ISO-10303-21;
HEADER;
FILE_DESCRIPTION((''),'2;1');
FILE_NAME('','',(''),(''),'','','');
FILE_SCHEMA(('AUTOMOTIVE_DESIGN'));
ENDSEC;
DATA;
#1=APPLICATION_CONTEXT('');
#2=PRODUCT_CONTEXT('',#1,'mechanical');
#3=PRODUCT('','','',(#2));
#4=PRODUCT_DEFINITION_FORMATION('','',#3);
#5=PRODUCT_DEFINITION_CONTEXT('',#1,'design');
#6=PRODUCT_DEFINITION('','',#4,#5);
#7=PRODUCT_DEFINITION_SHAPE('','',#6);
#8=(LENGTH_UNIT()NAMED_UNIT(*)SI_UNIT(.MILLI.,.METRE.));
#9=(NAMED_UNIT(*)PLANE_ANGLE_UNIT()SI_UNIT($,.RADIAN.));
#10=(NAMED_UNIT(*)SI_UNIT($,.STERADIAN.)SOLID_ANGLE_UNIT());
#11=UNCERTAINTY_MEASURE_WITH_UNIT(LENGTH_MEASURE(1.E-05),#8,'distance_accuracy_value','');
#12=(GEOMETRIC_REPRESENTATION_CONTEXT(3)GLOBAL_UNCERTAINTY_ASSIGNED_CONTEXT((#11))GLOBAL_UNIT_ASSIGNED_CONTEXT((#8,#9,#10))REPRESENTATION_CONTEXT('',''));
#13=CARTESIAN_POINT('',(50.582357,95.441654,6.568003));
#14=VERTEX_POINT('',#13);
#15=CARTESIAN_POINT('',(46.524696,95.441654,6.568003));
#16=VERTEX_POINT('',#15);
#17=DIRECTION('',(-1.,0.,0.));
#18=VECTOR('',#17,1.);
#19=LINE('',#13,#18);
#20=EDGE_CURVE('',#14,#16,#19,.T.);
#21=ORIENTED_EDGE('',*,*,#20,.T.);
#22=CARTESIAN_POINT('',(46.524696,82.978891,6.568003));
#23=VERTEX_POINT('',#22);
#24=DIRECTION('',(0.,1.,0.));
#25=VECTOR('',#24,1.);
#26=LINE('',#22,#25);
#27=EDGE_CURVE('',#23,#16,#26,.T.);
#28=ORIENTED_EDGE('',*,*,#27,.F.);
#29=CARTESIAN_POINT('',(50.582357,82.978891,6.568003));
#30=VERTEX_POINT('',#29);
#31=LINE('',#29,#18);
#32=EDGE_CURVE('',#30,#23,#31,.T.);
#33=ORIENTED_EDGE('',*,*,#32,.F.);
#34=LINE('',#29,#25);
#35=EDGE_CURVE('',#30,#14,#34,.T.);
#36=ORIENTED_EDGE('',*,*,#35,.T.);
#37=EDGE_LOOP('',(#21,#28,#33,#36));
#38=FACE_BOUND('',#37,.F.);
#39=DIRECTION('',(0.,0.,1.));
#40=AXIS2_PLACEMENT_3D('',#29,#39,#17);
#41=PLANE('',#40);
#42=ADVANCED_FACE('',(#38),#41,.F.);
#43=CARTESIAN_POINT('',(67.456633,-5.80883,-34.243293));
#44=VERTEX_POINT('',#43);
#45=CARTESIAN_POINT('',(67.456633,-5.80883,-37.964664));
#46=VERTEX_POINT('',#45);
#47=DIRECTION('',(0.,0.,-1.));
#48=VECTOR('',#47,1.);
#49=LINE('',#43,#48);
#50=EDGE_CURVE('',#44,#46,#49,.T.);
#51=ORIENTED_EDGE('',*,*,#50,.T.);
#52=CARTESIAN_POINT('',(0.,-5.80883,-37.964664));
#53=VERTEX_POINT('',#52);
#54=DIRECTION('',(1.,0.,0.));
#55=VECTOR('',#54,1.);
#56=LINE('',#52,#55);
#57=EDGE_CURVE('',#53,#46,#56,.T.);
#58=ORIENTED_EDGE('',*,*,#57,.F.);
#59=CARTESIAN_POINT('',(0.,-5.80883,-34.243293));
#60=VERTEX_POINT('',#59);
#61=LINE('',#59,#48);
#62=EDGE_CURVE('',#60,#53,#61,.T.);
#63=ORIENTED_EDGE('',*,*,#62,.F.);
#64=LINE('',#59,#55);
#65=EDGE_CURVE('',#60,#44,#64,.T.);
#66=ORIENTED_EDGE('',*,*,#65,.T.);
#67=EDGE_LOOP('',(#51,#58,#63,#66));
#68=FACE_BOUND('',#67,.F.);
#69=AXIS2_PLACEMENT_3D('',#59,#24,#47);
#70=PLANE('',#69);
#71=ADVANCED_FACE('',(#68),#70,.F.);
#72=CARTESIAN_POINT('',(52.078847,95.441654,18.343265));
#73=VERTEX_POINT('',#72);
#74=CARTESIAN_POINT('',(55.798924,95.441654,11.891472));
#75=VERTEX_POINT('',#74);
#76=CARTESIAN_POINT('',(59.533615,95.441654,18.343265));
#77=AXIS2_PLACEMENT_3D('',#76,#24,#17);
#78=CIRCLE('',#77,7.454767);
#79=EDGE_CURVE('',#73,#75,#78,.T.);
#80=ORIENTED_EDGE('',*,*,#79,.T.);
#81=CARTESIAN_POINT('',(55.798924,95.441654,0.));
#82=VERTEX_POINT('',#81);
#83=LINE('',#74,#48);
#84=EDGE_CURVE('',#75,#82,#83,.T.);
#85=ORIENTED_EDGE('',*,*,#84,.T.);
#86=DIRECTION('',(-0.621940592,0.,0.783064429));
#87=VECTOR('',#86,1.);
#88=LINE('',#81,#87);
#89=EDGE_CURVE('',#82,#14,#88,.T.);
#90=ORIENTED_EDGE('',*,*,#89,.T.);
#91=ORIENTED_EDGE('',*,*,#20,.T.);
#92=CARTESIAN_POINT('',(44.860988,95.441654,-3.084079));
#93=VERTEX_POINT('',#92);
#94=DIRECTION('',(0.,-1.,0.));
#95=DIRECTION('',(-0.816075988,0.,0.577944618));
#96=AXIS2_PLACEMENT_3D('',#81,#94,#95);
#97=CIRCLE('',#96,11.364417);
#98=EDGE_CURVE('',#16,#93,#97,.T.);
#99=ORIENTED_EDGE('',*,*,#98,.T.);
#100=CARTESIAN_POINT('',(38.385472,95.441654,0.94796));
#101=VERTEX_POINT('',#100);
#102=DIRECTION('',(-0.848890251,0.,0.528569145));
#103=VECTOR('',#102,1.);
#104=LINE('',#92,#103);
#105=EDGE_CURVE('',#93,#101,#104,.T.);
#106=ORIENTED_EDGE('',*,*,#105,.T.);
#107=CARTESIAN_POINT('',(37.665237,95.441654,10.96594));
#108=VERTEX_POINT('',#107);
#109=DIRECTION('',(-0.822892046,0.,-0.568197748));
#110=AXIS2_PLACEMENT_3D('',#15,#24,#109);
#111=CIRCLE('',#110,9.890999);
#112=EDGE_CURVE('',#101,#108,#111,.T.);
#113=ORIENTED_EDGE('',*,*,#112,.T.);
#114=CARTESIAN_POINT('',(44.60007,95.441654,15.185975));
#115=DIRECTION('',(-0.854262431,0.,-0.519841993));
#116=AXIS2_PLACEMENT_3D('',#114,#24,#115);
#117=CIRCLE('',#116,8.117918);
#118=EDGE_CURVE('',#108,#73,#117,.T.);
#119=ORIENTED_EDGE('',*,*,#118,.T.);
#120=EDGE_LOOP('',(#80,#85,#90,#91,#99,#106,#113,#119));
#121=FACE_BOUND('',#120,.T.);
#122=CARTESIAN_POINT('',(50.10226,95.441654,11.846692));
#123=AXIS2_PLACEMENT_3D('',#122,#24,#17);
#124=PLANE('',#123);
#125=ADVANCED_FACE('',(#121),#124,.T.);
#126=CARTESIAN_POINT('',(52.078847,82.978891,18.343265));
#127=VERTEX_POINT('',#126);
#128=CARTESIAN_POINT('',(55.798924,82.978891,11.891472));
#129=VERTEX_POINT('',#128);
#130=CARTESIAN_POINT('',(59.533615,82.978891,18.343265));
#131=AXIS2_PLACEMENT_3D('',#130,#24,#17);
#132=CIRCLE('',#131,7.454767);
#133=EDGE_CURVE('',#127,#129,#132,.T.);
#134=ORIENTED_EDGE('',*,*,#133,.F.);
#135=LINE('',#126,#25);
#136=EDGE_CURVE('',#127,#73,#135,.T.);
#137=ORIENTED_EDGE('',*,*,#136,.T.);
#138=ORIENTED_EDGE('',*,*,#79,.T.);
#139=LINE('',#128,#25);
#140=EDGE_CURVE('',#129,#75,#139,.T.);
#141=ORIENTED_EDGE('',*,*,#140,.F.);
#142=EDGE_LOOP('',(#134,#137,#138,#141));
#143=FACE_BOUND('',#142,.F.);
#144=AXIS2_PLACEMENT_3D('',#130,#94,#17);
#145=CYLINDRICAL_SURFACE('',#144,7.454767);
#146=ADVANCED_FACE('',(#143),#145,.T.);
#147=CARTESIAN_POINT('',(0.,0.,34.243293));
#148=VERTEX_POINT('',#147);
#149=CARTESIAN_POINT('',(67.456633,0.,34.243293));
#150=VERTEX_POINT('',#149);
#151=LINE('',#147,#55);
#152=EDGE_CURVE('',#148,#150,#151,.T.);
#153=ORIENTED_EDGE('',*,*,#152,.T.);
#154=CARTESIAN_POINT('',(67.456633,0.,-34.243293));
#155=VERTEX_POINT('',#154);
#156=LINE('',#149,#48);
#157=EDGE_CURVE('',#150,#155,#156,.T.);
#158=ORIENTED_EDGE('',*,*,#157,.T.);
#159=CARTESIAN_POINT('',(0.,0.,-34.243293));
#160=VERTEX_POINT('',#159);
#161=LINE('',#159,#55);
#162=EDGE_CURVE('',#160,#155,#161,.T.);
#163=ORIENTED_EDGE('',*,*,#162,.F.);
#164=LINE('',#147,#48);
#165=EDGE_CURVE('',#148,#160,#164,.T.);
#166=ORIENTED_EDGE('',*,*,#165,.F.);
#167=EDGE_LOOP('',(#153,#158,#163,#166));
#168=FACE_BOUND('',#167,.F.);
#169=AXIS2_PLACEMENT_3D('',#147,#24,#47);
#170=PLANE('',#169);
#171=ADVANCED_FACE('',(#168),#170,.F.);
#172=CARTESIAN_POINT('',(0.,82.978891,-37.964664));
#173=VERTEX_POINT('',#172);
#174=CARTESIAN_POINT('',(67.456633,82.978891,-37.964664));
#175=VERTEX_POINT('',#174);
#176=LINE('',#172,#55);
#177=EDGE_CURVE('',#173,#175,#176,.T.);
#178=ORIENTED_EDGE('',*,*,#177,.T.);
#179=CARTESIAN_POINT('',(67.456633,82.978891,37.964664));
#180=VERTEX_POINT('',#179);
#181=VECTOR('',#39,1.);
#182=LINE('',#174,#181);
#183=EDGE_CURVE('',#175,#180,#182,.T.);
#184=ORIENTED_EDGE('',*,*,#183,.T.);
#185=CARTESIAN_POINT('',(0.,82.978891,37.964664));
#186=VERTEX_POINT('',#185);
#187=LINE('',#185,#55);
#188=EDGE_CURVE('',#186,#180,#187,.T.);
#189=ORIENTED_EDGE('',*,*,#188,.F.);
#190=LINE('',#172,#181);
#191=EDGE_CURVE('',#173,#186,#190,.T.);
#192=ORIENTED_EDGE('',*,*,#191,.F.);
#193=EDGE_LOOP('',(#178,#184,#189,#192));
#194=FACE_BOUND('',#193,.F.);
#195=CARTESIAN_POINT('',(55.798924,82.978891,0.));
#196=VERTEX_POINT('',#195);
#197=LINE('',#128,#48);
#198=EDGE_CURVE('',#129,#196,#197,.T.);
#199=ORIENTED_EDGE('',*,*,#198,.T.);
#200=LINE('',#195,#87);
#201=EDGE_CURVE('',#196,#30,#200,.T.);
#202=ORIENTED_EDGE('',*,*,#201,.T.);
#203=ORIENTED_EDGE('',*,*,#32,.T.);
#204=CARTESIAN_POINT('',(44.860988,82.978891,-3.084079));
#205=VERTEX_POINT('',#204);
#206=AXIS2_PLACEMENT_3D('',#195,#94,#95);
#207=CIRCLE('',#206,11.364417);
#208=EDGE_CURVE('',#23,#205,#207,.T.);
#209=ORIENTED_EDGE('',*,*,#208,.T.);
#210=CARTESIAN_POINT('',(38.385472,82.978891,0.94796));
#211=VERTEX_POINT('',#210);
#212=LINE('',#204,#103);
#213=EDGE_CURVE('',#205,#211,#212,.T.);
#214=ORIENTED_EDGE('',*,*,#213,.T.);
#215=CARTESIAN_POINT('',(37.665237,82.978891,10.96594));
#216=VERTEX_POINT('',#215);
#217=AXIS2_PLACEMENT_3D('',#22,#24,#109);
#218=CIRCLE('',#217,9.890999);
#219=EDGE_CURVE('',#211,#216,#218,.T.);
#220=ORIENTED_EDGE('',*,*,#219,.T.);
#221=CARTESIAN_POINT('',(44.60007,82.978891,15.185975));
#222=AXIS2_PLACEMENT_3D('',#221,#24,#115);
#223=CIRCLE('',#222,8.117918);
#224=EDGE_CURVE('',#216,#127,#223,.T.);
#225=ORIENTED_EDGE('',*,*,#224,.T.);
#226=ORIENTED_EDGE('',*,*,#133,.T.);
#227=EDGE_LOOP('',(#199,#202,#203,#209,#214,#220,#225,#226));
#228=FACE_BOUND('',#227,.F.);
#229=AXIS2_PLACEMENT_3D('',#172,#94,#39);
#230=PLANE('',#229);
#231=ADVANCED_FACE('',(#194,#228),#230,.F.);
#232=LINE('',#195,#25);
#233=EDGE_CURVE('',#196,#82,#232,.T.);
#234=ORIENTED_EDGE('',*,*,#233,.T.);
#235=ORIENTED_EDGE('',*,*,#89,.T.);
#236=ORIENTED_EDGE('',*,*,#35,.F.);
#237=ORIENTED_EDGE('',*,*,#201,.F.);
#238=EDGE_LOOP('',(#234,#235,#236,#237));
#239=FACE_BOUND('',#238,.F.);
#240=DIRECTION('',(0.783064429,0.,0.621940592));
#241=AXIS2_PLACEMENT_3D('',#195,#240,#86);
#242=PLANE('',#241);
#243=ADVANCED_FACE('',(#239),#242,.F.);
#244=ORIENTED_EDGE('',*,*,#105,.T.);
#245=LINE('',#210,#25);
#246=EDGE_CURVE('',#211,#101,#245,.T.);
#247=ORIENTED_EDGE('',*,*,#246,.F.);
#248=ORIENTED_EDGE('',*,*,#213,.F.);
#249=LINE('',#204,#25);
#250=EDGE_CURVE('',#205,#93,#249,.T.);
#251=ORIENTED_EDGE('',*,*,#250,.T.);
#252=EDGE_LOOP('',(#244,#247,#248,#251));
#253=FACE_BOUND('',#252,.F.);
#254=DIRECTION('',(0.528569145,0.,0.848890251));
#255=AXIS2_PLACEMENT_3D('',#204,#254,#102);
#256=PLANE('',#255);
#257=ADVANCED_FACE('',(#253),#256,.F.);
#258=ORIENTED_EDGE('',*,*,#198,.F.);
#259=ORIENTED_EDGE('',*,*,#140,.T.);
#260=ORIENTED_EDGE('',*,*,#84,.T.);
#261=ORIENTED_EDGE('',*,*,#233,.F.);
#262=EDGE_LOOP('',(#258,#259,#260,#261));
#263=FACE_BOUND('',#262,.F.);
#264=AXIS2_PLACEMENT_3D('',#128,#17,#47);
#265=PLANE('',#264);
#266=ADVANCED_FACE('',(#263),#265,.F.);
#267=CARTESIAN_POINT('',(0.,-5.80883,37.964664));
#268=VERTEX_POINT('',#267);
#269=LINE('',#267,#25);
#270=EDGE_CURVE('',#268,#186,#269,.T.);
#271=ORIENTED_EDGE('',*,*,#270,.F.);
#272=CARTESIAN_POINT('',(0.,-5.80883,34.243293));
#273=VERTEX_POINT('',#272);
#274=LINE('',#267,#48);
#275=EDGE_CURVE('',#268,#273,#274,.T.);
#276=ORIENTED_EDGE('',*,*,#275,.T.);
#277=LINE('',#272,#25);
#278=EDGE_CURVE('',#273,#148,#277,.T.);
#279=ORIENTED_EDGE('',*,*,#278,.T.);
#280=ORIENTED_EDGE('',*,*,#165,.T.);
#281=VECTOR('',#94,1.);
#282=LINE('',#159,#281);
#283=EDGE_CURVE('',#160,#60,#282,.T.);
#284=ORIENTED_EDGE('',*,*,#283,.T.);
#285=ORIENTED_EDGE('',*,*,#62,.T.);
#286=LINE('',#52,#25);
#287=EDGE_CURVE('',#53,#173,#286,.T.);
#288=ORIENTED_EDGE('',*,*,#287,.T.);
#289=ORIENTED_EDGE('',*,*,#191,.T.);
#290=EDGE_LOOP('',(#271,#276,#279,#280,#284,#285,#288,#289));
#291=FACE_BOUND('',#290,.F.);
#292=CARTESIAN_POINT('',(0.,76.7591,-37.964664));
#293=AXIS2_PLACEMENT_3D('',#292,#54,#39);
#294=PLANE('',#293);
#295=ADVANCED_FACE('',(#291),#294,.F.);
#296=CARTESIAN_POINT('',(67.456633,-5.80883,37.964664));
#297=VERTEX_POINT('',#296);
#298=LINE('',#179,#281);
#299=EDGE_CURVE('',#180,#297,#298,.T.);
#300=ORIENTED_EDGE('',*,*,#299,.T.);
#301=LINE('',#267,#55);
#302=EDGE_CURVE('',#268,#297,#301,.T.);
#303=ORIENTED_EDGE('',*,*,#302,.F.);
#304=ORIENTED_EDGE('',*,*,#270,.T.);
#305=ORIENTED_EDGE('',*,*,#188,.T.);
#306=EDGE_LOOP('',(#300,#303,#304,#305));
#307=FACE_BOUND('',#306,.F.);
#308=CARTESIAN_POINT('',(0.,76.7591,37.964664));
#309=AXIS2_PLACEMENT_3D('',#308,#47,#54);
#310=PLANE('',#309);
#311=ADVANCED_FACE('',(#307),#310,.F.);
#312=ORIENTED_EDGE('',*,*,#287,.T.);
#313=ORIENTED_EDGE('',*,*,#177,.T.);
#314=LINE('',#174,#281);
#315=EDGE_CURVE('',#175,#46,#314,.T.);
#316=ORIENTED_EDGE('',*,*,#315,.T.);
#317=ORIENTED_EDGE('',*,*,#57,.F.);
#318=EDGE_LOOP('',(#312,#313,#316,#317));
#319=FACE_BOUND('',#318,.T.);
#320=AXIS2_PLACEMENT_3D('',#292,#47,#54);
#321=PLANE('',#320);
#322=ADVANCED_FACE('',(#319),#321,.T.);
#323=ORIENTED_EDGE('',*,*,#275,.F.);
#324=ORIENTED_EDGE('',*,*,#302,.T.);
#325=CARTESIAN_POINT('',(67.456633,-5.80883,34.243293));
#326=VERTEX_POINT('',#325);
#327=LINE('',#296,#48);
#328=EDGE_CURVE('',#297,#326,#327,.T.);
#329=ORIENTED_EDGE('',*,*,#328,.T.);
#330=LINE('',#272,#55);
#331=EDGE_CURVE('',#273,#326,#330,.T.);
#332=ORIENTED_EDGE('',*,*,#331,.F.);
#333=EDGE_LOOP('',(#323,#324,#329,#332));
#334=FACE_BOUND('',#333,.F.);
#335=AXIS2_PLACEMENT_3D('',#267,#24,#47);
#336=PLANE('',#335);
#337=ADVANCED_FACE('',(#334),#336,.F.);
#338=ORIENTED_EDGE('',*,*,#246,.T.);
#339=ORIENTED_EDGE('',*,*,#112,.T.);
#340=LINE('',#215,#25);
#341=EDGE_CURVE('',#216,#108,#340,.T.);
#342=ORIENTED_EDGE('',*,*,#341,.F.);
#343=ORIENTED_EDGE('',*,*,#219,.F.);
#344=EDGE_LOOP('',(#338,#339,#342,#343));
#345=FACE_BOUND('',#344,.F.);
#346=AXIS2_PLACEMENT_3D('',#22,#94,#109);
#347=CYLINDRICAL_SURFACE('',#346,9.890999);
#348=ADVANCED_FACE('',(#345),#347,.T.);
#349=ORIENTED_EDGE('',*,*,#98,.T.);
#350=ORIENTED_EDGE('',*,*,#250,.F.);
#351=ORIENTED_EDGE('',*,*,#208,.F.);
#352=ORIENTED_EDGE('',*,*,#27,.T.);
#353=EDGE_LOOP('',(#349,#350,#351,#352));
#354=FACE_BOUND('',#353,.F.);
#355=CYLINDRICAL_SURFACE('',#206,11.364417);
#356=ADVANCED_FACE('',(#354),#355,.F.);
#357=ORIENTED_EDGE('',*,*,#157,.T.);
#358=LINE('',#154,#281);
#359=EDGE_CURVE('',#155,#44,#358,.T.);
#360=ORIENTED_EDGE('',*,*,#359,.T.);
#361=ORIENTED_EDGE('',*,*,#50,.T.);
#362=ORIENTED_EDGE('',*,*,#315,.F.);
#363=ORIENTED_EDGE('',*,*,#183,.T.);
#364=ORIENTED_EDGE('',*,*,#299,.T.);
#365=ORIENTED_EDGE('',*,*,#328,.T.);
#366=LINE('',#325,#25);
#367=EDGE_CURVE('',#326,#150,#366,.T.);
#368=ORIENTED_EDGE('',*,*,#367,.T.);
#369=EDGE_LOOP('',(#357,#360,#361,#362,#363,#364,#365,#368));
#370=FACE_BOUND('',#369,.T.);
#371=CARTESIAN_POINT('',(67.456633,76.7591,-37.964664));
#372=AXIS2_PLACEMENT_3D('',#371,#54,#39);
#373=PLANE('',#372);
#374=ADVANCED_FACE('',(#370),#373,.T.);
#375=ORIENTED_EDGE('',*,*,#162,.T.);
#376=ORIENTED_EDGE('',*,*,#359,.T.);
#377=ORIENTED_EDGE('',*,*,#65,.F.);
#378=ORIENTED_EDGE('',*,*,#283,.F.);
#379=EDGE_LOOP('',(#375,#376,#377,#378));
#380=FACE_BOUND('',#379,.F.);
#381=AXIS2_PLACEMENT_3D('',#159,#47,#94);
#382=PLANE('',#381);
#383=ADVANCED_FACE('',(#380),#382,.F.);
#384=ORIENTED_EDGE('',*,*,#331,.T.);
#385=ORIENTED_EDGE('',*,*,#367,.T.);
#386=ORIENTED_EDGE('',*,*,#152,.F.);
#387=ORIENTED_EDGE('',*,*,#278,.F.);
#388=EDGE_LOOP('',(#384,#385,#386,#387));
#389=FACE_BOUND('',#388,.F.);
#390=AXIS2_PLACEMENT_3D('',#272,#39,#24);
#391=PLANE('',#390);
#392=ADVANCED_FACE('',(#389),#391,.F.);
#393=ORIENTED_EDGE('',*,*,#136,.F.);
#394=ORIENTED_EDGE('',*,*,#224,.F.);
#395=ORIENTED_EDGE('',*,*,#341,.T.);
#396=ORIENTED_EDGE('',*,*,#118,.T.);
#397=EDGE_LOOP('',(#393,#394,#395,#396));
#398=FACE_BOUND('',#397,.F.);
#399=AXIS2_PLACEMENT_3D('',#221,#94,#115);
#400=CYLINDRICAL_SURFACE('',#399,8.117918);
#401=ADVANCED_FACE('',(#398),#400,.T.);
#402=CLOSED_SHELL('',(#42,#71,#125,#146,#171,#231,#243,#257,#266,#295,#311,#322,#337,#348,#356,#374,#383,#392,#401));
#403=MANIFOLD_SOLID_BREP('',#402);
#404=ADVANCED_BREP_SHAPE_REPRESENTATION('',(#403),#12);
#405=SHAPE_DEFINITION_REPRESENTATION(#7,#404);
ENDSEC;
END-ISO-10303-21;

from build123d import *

# Parameters (mm, degrees)
F1_DEPTH = 67.4566328526
F2_DEPTH = 6.2197912484
F4_DEPTH = 12.4627631158


with BuildPart() as f1:
    # F0 (on Right) → F1 (new body)
    with BuildSketch(Plane.YZ):
        Polygon((-5.8088302612, 34.2432931066), (0, 34.2432931066), (0, -34.2432931066), (-5.8088302612, -34.2432931066), (-5.8088302612, -37.9646643996), (76.7590999603, -37.9646643996), (76.7590999603, 37.9646643996), (-5.8088302612, 37.9646643996), align=None)
    extrude(amount=F1_DEPTH)

    # F2 (add): a face of the model
    f2_faces = [f1.faces().sort_by_distance(p)[0] for p in [
        (33.7283164263, 76.7590999603, 0),
    ]]
    extrude(f2_faces, amount=F2_DEPTH)

    # F3 (on face) → F4 (join)
    with BuildSketch(Plane(origin=(0, 82.9788912088, 0), x_dir=(-1, 0, 0), z_dir=(0, 1, 0))):
        with BuildLine():
            ThreePointArc((-38.3854716222, 0.9479600765), (-36.6591605512, 5.8587284108), (-37.6652367413, 10.9659396112))
            ThreePointArc((-37.6652367413, 10.9659396112), (-40.901393767, 22.4123427927), (-52.0788472287, 18.3432652315))
            ThreePointArc((-52.0788472287, 18.3432652315), (-65.9917417473, 22.0669934876), (-55.7989236075, 11.8914716641))
            Line((-55.7989236075, 11.8914716641), (-55.7989236075, 0))
            Line((-55.7989236075, 0), (-50.582356751, 6.5680034459))
            Line((-50.582356751, 6.5680034459), (-46.5246960521, 6.5680034459))
            ThreePointArc((-46.5246960521, 6.5680034459), (-44.599657899, 1.9303920858), (-44.8609884943, -3.0840787076))
            Line((-44.8609884943, -3.0840787076), (-38.3854716222, 0.9479600765))
        make_face()
    extrude(amount=F4_DEPTH)


solid = f1.part
